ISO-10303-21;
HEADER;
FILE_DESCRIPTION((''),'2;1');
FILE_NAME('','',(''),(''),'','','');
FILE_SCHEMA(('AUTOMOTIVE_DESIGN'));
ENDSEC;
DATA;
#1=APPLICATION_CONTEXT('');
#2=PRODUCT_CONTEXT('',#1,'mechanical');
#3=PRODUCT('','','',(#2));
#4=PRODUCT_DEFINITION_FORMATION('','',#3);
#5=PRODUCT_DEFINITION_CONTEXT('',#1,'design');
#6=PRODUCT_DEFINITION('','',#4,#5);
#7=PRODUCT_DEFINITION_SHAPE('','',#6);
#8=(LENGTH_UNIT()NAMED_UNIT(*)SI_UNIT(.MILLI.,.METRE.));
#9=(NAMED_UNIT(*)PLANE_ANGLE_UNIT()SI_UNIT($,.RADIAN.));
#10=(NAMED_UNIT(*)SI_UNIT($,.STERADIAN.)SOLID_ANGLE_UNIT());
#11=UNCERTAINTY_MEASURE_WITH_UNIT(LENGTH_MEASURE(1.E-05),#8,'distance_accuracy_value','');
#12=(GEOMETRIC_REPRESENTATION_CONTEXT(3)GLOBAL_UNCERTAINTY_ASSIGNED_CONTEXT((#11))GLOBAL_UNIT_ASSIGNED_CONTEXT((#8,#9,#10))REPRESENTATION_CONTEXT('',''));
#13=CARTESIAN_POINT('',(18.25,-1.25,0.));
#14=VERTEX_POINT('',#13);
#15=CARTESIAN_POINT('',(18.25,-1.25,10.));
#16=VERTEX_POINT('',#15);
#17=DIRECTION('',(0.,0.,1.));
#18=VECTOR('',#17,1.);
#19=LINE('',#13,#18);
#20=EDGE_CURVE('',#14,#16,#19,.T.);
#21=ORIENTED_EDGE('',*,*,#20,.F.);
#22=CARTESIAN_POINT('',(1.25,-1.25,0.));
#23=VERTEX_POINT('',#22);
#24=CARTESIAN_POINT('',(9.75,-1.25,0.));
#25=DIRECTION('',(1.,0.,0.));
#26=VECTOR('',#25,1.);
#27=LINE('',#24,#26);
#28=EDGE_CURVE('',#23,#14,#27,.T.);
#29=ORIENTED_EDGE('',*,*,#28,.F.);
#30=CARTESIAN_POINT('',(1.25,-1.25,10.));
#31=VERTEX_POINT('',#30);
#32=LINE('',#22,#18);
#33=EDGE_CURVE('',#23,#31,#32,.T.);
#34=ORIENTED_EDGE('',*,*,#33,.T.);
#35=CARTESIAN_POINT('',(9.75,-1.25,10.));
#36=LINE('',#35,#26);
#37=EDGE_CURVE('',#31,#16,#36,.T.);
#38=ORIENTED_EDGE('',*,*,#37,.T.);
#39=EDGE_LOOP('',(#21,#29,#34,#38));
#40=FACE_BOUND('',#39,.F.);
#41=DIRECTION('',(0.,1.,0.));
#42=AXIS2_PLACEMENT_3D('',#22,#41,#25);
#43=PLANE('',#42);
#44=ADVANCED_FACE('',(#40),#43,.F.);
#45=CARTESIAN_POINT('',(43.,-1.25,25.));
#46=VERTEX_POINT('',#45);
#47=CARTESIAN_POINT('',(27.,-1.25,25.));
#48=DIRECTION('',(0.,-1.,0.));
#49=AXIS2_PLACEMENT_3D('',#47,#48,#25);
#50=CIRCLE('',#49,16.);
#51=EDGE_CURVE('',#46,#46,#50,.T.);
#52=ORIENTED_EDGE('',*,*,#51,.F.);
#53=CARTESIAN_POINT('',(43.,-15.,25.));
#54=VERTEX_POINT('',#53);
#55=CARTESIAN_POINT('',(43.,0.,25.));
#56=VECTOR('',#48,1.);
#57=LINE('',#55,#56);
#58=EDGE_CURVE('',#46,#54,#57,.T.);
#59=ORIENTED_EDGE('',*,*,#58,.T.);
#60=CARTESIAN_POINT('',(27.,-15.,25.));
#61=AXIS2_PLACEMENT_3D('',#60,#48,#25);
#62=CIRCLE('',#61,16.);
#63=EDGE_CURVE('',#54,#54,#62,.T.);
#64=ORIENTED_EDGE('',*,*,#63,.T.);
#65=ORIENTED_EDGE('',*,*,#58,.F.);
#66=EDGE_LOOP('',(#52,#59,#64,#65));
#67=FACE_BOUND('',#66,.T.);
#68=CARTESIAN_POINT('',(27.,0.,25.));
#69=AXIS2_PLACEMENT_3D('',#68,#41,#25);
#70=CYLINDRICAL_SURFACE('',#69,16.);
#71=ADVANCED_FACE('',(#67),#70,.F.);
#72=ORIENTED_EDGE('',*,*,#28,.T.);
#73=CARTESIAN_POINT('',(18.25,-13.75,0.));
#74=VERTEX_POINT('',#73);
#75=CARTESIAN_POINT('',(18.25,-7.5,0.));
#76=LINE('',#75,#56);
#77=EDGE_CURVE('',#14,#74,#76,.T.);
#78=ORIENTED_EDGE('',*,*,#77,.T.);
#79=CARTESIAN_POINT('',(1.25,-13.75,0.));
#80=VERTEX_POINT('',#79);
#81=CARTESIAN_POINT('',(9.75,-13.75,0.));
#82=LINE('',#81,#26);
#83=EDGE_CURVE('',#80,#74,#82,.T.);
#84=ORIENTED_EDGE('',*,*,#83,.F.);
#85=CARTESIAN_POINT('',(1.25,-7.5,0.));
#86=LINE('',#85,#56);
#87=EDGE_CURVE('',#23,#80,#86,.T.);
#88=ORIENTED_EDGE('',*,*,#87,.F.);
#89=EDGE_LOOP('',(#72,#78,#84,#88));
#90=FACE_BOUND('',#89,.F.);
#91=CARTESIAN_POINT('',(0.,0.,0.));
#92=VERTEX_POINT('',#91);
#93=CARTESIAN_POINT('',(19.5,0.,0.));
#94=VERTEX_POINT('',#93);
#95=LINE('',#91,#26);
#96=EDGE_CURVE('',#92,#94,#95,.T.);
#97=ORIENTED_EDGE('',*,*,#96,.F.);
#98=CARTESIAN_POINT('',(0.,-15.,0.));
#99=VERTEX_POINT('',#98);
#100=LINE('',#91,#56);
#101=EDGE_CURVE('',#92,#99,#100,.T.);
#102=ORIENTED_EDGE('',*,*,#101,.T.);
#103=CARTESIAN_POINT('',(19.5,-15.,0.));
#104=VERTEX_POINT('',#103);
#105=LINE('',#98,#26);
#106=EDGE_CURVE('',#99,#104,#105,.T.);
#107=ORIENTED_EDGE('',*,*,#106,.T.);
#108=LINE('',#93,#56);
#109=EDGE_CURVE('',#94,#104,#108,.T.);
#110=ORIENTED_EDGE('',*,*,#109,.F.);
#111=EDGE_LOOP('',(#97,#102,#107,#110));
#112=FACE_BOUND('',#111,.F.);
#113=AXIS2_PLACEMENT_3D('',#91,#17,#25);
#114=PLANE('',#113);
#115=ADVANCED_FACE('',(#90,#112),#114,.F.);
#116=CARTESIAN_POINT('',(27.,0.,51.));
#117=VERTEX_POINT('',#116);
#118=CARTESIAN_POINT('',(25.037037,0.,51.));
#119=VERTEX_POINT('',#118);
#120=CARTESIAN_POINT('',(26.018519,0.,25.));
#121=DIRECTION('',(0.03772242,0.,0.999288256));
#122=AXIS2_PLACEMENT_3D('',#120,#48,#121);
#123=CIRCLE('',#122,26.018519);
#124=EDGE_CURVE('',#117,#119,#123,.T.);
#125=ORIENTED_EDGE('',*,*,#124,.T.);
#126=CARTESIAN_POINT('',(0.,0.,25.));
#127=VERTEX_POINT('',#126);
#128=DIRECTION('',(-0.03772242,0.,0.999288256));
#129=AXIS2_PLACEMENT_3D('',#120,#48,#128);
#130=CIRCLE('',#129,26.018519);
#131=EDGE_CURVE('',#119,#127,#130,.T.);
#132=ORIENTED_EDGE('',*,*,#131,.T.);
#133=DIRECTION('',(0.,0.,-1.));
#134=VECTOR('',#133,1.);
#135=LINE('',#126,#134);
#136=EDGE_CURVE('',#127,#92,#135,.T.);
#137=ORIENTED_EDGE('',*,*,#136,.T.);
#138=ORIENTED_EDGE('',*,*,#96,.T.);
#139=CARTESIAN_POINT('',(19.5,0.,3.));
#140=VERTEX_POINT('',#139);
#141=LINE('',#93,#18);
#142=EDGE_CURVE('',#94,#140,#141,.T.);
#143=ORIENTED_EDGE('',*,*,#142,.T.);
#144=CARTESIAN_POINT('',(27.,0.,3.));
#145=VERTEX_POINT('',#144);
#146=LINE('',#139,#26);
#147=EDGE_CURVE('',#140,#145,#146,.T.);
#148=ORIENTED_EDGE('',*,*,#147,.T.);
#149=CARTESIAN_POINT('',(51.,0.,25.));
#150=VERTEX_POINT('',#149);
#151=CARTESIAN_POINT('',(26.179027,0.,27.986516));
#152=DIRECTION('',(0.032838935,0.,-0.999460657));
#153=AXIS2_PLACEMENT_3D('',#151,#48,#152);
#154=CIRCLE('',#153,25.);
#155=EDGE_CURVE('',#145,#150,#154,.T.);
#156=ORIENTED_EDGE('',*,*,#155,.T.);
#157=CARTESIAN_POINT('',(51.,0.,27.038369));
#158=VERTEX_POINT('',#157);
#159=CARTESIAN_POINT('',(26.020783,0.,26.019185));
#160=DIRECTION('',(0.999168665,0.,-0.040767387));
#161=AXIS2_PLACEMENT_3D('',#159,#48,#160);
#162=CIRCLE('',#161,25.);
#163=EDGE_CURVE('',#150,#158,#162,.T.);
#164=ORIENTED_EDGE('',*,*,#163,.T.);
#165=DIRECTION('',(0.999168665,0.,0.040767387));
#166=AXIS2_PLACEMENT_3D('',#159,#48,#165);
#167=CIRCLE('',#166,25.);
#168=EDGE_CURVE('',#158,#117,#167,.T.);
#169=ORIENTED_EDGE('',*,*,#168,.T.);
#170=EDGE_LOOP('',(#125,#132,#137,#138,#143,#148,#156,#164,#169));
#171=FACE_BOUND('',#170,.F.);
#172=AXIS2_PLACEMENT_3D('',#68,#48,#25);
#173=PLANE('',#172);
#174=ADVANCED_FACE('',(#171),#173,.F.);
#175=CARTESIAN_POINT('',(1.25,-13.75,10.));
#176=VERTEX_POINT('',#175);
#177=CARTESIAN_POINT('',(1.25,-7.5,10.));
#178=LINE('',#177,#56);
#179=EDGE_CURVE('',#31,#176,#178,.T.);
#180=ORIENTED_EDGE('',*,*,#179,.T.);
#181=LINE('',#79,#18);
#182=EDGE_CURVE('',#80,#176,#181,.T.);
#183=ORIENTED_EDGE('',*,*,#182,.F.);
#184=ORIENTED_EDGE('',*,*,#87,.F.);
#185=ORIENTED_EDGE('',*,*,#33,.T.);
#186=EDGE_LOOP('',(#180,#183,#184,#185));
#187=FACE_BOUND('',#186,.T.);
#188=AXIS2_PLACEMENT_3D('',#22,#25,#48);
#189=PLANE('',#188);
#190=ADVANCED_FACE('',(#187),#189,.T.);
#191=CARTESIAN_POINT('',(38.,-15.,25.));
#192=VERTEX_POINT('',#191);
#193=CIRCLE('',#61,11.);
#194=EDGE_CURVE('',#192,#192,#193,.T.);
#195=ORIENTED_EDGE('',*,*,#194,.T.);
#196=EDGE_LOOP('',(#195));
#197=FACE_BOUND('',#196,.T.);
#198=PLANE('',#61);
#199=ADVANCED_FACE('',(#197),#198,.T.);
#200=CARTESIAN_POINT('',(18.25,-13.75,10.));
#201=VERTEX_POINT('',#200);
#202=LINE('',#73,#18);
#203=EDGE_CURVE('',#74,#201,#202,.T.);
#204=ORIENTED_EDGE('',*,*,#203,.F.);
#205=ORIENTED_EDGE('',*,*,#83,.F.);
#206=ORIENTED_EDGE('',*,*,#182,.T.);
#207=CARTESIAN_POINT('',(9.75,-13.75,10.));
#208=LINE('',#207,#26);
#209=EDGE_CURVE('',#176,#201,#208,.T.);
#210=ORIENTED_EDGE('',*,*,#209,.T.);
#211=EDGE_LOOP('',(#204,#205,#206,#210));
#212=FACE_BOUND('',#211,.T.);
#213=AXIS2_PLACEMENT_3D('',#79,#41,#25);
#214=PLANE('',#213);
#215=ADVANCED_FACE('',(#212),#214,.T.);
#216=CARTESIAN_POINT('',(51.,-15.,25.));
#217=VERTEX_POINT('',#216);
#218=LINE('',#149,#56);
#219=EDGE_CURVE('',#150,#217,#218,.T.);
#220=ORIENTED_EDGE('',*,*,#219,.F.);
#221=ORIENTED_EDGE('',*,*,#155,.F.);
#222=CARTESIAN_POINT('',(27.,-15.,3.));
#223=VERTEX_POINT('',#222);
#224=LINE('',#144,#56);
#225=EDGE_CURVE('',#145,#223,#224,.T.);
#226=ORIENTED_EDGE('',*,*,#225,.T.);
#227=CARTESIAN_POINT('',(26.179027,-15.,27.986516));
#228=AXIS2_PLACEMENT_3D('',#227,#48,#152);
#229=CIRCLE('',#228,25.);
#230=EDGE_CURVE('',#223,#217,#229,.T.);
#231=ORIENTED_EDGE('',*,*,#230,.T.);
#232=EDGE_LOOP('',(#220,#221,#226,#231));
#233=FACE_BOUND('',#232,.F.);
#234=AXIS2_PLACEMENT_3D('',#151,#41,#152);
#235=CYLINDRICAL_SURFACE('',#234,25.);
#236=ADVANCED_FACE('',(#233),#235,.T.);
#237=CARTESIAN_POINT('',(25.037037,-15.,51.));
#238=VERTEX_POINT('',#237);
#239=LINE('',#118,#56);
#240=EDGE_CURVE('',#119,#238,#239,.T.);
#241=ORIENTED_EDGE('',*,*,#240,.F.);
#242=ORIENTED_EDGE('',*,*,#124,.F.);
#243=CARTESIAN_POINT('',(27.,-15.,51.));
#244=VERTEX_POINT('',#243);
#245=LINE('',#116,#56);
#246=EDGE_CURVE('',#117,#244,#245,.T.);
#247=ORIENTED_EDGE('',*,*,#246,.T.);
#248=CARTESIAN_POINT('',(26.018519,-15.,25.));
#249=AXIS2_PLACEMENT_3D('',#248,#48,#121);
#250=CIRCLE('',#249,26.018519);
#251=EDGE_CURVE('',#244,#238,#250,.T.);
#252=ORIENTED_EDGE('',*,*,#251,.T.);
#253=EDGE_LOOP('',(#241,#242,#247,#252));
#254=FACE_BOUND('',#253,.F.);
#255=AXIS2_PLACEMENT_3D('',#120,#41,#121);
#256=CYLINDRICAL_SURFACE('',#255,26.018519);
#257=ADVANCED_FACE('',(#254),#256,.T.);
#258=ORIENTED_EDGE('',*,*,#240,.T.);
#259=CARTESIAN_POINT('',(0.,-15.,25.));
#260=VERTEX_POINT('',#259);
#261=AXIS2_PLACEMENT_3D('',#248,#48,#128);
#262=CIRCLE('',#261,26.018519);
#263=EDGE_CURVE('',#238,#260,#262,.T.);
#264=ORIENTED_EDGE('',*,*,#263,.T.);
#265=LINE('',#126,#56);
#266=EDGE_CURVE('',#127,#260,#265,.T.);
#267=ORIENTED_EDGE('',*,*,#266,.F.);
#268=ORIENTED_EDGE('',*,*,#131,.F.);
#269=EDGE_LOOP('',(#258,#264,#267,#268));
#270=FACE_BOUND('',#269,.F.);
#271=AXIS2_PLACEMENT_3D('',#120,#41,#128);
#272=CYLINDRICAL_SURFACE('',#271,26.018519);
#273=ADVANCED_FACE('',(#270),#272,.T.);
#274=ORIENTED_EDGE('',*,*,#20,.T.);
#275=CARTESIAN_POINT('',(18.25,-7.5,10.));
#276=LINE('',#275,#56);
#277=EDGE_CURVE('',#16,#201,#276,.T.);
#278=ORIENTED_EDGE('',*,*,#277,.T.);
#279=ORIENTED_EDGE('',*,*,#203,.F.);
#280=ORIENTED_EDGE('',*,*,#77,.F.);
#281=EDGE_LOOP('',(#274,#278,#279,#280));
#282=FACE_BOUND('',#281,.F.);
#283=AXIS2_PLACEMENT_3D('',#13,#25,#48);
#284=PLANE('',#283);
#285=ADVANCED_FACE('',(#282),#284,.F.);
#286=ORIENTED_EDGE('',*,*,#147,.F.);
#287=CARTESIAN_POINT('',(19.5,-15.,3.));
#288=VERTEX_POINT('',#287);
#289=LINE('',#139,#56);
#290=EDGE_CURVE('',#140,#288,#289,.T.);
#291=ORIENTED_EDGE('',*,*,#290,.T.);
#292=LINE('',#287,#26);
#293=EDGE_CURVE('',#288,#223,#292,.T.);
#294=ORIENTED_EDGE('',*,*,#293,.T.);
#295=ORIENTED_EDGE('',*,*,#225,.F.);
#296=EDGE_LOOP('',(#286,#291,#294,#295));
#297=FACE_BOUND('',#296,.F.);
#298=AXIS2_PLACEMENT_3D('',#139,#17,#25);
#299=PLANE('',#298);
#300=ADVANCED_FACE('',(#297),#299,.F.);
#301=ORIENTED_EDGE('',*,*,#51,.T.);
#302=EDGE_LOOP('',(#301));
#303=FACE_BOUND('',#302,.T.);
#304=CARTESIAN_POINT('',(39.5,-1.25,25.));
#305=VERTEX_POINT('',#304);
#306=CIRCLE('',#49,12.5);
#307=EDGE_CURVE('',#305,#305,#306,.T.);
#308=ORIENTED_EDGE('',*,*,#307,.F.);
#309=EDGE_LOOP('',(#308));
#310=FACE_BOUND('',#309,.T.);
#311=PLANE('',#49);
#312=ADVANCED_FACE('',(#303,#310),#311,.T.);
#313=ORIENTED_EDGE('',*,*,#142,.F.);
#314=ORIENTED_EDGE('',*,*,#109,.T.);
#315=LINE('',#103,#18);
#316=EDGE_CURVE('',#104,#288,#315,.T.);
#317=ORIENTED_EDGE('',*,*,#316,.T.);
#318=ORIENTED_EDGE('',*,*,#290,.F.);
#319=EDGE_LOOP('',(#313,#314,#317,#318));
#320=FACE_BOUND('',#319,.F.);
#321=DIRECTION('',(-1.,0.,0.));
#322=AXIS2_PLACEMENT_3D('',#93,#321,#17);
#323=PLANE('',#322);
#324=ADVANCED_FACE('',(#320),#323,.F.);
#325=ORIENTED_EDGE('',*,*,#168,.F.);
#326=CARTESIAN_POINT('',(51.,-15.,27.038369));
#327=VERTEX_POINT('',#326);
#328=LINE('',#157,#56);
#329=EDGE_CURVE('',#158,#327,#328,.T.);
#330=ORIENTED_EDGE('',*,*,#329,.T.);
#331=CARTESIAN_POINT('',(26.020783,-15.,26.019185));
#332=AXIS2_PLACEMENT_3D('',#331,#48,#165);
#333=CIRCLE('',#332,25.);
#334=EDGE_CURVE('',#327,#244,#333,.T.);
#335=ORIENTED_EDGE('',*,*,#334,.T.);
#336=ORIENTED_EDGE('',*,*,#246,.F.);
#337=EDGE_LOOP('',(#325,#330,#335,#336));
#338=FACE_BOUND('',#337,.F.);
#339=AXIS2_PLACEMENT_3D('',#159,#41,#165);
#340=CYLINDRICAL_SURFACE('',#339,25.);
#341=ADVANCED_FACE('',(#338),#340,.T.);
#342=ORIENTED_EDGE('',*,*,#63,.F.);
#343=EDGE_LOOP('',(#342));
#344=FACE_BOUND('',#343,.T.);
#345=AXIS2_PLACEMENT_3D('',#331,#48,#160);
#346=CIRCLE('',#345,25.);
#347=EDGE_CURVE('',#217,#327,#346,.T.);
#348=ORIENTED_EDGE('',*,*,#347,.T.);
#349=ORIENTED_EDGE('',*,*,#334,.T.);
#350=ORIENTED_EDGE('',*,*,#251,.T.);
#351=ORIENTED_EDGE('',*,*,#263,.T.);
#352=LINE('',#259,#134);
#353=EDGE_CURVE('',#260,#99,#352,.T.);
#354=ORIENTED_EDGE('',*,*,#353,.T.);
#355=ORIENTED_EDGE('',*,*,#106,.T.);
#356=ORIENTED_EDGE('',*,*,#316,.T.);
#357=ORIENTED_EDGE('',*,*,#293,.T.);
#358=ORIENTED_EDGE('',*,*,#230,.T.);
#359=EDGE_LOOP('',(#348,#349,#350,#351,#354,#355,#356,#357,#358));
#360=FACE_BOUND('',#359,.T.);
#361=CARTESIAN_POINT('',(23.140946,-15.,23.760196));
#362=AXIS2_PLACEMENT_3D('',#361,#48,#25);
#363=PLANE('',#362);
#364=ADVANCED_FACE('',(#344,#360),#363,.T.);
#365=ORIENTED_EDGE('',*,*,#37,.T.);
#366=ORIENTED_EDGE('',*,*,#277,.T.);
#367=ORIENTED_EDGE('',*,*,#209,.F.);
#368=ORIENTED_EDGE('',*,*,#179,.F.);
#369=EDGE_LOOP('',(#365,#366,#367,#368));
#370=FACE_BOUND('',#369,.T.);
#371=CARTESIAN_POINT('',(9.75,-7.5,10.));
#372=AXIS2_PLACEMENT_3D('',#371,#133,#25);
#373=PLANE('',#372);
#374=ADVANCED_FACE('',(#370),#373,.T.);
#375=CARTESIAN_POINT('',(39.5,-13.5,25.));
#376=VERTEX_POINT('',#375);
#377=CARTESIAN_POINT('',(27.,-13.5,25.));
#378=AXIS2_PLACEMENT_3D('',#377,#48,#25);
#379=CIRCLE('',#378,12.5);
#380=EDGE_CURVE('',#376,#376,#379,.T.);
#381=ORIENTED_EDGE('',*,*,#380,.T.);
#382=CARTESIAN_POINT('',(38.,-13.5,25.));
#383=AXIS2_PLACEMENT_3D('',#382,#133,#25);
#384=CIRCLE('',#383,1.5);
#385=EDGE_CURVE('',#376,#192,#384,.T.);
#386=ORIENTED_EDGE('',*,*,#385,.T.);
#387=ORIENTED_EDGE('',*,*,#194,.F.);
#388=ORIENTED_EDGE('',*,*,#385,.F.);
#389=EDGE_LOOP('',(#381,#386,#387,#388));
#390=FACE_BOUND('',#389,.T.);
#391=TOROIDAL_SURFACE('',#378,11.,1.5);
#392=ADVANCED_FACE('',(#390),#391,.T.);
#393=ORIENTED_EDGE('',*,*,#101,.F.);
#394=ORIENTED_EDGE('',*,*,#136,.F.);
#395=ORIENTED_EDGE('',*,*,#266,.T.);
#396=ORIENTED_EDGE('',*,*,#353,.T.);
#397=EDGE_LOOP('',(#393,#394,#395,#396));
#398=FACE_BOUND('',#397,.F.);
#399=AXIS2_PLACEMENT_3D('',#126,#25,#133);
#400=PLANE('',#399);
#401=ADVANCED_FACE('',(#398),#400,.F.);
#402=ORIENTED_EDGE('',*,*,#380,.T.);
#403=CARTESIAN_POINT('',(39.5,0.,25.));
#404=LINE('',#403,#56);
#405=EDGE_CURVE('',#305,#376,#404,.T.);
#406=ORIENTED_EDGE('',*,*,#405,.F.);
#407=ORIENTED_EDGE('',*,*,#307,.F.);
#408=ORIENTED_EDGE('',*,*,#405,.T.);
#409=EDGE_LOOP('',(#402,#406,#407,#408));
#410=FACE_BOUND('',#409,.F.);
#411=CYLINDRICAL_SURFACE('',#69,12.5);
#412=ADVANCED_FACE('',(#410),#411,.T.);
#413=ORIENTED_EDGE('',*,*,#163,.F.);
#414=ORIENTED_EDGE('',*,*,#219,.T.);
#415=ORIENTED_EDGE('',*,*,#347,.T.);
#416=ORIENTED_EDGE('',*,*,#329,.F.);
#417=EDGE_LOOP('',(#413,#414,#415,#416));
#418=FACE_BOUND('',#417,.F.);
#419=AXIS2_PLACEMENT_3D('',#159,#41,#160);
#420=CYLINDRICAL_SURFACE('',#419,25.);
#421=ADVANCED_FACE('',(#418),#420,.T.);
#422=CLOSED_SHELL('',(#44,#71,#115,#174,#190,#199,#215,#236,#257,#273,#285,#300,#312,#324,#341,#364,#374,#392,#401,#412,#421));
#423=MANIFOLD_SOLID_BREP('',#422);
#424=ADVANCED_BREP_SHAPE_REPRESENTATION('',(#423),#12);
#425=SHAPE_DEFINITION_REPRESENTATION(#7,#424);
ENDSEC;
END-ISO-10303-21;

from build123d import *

# Parameters (mm, degrees)
F0_R     = 16
F1_DEPTH = 15
F0_R_2   = 12.5
F2_DEPTH = 1.25
F3_W     = 17
F3_H     = 12.5
F4_DEPTH = 10
F5_R     = 1.5


with BuildPart() as f1:
    # F0 (on Front) → F1 (new body)
    with BuildSketch(Plane.XZ):
        with BuildLine():
            Line((0, 25), (0, 0))
            Line((0, 0), (19.5, 0))
            Line((19.5, 0), (19.5, 3))
            Line((19.5, 3), (27, 3))
            ThreePointArc((27, 3), (43.0721423298, 9.5576629129), (51, 25))
            Line((51, 25), (51, 27.0383693291))
            ThreePointArc((51, 27.0383693291), (43.6843051192, 43.7109906775), (27, 51))
            Line((27, 51), (25.037037037, 51))
            ThreePointArc((25.037037037, 51), (7.2768537045, 43.0475290801), (0, 25))
        make_face()
        with Locations((27, 25)):
            Circle(F0_R, mode=Mode.SUBTRACT)
        with BuildLine():
            ThreePointArc((27, 51), (26.0185185185, 51.0185185185), (25.037037037, 51))
            Line((25.037037037, 51), (27, 51))
        make_face()
        with BuildLine():
            Line((51, 27.0383693291), (51, 25))
            ThreePointArc((51, 25), (51.0207833866, 26.0191846645), (51, 27.0383693291))
        make_face()
    extrude(amount=F1_DEPTH)



with BuildPart() as f1b:
    # F0 (on Front) → F1, piece 2 (new body)
    with BuildSketch(Plane.XZ):
        with Locations((27, 25)):
            Circle(F0_R_2)
    extrude(amount=F1_DEPTH)


with BuildPart() as f1_1:
    add(f1.part)

    add(f1b.part)  # F2 merges F1b
    # F0 (on Front) → F2 (join)
    with BuildSketch(Plane.XZ):
        with Locations((27, 25)):
            Circle(F0_R)
        with Locations((27, 25)):
            Circle(F0_R_2, mode=Mode.SUBTRACT)
    extrude(amount=F2_DEPTH)

    # F3 (on face) → F4 (cut)
    with BuildSketch(Plane(origin=(0, 0, 0), x_dir=(1, 0, 0), z_dir=(0, 0, -1))):
        with Locations((9.75, 7.5)):
            Rectangle(F3_W, F3_H)
    extrude(amount=-F4_DEPTH, mode=Mode.SUBTRACT)

    # F5
    f5_edges = [f1_1.edges().sort_by_distance(p)[0] for p in [
        (14.5, -15, 25),
    ]]
    fillet(f5_edges, radius=F5_R)


solid = f1_1.part
